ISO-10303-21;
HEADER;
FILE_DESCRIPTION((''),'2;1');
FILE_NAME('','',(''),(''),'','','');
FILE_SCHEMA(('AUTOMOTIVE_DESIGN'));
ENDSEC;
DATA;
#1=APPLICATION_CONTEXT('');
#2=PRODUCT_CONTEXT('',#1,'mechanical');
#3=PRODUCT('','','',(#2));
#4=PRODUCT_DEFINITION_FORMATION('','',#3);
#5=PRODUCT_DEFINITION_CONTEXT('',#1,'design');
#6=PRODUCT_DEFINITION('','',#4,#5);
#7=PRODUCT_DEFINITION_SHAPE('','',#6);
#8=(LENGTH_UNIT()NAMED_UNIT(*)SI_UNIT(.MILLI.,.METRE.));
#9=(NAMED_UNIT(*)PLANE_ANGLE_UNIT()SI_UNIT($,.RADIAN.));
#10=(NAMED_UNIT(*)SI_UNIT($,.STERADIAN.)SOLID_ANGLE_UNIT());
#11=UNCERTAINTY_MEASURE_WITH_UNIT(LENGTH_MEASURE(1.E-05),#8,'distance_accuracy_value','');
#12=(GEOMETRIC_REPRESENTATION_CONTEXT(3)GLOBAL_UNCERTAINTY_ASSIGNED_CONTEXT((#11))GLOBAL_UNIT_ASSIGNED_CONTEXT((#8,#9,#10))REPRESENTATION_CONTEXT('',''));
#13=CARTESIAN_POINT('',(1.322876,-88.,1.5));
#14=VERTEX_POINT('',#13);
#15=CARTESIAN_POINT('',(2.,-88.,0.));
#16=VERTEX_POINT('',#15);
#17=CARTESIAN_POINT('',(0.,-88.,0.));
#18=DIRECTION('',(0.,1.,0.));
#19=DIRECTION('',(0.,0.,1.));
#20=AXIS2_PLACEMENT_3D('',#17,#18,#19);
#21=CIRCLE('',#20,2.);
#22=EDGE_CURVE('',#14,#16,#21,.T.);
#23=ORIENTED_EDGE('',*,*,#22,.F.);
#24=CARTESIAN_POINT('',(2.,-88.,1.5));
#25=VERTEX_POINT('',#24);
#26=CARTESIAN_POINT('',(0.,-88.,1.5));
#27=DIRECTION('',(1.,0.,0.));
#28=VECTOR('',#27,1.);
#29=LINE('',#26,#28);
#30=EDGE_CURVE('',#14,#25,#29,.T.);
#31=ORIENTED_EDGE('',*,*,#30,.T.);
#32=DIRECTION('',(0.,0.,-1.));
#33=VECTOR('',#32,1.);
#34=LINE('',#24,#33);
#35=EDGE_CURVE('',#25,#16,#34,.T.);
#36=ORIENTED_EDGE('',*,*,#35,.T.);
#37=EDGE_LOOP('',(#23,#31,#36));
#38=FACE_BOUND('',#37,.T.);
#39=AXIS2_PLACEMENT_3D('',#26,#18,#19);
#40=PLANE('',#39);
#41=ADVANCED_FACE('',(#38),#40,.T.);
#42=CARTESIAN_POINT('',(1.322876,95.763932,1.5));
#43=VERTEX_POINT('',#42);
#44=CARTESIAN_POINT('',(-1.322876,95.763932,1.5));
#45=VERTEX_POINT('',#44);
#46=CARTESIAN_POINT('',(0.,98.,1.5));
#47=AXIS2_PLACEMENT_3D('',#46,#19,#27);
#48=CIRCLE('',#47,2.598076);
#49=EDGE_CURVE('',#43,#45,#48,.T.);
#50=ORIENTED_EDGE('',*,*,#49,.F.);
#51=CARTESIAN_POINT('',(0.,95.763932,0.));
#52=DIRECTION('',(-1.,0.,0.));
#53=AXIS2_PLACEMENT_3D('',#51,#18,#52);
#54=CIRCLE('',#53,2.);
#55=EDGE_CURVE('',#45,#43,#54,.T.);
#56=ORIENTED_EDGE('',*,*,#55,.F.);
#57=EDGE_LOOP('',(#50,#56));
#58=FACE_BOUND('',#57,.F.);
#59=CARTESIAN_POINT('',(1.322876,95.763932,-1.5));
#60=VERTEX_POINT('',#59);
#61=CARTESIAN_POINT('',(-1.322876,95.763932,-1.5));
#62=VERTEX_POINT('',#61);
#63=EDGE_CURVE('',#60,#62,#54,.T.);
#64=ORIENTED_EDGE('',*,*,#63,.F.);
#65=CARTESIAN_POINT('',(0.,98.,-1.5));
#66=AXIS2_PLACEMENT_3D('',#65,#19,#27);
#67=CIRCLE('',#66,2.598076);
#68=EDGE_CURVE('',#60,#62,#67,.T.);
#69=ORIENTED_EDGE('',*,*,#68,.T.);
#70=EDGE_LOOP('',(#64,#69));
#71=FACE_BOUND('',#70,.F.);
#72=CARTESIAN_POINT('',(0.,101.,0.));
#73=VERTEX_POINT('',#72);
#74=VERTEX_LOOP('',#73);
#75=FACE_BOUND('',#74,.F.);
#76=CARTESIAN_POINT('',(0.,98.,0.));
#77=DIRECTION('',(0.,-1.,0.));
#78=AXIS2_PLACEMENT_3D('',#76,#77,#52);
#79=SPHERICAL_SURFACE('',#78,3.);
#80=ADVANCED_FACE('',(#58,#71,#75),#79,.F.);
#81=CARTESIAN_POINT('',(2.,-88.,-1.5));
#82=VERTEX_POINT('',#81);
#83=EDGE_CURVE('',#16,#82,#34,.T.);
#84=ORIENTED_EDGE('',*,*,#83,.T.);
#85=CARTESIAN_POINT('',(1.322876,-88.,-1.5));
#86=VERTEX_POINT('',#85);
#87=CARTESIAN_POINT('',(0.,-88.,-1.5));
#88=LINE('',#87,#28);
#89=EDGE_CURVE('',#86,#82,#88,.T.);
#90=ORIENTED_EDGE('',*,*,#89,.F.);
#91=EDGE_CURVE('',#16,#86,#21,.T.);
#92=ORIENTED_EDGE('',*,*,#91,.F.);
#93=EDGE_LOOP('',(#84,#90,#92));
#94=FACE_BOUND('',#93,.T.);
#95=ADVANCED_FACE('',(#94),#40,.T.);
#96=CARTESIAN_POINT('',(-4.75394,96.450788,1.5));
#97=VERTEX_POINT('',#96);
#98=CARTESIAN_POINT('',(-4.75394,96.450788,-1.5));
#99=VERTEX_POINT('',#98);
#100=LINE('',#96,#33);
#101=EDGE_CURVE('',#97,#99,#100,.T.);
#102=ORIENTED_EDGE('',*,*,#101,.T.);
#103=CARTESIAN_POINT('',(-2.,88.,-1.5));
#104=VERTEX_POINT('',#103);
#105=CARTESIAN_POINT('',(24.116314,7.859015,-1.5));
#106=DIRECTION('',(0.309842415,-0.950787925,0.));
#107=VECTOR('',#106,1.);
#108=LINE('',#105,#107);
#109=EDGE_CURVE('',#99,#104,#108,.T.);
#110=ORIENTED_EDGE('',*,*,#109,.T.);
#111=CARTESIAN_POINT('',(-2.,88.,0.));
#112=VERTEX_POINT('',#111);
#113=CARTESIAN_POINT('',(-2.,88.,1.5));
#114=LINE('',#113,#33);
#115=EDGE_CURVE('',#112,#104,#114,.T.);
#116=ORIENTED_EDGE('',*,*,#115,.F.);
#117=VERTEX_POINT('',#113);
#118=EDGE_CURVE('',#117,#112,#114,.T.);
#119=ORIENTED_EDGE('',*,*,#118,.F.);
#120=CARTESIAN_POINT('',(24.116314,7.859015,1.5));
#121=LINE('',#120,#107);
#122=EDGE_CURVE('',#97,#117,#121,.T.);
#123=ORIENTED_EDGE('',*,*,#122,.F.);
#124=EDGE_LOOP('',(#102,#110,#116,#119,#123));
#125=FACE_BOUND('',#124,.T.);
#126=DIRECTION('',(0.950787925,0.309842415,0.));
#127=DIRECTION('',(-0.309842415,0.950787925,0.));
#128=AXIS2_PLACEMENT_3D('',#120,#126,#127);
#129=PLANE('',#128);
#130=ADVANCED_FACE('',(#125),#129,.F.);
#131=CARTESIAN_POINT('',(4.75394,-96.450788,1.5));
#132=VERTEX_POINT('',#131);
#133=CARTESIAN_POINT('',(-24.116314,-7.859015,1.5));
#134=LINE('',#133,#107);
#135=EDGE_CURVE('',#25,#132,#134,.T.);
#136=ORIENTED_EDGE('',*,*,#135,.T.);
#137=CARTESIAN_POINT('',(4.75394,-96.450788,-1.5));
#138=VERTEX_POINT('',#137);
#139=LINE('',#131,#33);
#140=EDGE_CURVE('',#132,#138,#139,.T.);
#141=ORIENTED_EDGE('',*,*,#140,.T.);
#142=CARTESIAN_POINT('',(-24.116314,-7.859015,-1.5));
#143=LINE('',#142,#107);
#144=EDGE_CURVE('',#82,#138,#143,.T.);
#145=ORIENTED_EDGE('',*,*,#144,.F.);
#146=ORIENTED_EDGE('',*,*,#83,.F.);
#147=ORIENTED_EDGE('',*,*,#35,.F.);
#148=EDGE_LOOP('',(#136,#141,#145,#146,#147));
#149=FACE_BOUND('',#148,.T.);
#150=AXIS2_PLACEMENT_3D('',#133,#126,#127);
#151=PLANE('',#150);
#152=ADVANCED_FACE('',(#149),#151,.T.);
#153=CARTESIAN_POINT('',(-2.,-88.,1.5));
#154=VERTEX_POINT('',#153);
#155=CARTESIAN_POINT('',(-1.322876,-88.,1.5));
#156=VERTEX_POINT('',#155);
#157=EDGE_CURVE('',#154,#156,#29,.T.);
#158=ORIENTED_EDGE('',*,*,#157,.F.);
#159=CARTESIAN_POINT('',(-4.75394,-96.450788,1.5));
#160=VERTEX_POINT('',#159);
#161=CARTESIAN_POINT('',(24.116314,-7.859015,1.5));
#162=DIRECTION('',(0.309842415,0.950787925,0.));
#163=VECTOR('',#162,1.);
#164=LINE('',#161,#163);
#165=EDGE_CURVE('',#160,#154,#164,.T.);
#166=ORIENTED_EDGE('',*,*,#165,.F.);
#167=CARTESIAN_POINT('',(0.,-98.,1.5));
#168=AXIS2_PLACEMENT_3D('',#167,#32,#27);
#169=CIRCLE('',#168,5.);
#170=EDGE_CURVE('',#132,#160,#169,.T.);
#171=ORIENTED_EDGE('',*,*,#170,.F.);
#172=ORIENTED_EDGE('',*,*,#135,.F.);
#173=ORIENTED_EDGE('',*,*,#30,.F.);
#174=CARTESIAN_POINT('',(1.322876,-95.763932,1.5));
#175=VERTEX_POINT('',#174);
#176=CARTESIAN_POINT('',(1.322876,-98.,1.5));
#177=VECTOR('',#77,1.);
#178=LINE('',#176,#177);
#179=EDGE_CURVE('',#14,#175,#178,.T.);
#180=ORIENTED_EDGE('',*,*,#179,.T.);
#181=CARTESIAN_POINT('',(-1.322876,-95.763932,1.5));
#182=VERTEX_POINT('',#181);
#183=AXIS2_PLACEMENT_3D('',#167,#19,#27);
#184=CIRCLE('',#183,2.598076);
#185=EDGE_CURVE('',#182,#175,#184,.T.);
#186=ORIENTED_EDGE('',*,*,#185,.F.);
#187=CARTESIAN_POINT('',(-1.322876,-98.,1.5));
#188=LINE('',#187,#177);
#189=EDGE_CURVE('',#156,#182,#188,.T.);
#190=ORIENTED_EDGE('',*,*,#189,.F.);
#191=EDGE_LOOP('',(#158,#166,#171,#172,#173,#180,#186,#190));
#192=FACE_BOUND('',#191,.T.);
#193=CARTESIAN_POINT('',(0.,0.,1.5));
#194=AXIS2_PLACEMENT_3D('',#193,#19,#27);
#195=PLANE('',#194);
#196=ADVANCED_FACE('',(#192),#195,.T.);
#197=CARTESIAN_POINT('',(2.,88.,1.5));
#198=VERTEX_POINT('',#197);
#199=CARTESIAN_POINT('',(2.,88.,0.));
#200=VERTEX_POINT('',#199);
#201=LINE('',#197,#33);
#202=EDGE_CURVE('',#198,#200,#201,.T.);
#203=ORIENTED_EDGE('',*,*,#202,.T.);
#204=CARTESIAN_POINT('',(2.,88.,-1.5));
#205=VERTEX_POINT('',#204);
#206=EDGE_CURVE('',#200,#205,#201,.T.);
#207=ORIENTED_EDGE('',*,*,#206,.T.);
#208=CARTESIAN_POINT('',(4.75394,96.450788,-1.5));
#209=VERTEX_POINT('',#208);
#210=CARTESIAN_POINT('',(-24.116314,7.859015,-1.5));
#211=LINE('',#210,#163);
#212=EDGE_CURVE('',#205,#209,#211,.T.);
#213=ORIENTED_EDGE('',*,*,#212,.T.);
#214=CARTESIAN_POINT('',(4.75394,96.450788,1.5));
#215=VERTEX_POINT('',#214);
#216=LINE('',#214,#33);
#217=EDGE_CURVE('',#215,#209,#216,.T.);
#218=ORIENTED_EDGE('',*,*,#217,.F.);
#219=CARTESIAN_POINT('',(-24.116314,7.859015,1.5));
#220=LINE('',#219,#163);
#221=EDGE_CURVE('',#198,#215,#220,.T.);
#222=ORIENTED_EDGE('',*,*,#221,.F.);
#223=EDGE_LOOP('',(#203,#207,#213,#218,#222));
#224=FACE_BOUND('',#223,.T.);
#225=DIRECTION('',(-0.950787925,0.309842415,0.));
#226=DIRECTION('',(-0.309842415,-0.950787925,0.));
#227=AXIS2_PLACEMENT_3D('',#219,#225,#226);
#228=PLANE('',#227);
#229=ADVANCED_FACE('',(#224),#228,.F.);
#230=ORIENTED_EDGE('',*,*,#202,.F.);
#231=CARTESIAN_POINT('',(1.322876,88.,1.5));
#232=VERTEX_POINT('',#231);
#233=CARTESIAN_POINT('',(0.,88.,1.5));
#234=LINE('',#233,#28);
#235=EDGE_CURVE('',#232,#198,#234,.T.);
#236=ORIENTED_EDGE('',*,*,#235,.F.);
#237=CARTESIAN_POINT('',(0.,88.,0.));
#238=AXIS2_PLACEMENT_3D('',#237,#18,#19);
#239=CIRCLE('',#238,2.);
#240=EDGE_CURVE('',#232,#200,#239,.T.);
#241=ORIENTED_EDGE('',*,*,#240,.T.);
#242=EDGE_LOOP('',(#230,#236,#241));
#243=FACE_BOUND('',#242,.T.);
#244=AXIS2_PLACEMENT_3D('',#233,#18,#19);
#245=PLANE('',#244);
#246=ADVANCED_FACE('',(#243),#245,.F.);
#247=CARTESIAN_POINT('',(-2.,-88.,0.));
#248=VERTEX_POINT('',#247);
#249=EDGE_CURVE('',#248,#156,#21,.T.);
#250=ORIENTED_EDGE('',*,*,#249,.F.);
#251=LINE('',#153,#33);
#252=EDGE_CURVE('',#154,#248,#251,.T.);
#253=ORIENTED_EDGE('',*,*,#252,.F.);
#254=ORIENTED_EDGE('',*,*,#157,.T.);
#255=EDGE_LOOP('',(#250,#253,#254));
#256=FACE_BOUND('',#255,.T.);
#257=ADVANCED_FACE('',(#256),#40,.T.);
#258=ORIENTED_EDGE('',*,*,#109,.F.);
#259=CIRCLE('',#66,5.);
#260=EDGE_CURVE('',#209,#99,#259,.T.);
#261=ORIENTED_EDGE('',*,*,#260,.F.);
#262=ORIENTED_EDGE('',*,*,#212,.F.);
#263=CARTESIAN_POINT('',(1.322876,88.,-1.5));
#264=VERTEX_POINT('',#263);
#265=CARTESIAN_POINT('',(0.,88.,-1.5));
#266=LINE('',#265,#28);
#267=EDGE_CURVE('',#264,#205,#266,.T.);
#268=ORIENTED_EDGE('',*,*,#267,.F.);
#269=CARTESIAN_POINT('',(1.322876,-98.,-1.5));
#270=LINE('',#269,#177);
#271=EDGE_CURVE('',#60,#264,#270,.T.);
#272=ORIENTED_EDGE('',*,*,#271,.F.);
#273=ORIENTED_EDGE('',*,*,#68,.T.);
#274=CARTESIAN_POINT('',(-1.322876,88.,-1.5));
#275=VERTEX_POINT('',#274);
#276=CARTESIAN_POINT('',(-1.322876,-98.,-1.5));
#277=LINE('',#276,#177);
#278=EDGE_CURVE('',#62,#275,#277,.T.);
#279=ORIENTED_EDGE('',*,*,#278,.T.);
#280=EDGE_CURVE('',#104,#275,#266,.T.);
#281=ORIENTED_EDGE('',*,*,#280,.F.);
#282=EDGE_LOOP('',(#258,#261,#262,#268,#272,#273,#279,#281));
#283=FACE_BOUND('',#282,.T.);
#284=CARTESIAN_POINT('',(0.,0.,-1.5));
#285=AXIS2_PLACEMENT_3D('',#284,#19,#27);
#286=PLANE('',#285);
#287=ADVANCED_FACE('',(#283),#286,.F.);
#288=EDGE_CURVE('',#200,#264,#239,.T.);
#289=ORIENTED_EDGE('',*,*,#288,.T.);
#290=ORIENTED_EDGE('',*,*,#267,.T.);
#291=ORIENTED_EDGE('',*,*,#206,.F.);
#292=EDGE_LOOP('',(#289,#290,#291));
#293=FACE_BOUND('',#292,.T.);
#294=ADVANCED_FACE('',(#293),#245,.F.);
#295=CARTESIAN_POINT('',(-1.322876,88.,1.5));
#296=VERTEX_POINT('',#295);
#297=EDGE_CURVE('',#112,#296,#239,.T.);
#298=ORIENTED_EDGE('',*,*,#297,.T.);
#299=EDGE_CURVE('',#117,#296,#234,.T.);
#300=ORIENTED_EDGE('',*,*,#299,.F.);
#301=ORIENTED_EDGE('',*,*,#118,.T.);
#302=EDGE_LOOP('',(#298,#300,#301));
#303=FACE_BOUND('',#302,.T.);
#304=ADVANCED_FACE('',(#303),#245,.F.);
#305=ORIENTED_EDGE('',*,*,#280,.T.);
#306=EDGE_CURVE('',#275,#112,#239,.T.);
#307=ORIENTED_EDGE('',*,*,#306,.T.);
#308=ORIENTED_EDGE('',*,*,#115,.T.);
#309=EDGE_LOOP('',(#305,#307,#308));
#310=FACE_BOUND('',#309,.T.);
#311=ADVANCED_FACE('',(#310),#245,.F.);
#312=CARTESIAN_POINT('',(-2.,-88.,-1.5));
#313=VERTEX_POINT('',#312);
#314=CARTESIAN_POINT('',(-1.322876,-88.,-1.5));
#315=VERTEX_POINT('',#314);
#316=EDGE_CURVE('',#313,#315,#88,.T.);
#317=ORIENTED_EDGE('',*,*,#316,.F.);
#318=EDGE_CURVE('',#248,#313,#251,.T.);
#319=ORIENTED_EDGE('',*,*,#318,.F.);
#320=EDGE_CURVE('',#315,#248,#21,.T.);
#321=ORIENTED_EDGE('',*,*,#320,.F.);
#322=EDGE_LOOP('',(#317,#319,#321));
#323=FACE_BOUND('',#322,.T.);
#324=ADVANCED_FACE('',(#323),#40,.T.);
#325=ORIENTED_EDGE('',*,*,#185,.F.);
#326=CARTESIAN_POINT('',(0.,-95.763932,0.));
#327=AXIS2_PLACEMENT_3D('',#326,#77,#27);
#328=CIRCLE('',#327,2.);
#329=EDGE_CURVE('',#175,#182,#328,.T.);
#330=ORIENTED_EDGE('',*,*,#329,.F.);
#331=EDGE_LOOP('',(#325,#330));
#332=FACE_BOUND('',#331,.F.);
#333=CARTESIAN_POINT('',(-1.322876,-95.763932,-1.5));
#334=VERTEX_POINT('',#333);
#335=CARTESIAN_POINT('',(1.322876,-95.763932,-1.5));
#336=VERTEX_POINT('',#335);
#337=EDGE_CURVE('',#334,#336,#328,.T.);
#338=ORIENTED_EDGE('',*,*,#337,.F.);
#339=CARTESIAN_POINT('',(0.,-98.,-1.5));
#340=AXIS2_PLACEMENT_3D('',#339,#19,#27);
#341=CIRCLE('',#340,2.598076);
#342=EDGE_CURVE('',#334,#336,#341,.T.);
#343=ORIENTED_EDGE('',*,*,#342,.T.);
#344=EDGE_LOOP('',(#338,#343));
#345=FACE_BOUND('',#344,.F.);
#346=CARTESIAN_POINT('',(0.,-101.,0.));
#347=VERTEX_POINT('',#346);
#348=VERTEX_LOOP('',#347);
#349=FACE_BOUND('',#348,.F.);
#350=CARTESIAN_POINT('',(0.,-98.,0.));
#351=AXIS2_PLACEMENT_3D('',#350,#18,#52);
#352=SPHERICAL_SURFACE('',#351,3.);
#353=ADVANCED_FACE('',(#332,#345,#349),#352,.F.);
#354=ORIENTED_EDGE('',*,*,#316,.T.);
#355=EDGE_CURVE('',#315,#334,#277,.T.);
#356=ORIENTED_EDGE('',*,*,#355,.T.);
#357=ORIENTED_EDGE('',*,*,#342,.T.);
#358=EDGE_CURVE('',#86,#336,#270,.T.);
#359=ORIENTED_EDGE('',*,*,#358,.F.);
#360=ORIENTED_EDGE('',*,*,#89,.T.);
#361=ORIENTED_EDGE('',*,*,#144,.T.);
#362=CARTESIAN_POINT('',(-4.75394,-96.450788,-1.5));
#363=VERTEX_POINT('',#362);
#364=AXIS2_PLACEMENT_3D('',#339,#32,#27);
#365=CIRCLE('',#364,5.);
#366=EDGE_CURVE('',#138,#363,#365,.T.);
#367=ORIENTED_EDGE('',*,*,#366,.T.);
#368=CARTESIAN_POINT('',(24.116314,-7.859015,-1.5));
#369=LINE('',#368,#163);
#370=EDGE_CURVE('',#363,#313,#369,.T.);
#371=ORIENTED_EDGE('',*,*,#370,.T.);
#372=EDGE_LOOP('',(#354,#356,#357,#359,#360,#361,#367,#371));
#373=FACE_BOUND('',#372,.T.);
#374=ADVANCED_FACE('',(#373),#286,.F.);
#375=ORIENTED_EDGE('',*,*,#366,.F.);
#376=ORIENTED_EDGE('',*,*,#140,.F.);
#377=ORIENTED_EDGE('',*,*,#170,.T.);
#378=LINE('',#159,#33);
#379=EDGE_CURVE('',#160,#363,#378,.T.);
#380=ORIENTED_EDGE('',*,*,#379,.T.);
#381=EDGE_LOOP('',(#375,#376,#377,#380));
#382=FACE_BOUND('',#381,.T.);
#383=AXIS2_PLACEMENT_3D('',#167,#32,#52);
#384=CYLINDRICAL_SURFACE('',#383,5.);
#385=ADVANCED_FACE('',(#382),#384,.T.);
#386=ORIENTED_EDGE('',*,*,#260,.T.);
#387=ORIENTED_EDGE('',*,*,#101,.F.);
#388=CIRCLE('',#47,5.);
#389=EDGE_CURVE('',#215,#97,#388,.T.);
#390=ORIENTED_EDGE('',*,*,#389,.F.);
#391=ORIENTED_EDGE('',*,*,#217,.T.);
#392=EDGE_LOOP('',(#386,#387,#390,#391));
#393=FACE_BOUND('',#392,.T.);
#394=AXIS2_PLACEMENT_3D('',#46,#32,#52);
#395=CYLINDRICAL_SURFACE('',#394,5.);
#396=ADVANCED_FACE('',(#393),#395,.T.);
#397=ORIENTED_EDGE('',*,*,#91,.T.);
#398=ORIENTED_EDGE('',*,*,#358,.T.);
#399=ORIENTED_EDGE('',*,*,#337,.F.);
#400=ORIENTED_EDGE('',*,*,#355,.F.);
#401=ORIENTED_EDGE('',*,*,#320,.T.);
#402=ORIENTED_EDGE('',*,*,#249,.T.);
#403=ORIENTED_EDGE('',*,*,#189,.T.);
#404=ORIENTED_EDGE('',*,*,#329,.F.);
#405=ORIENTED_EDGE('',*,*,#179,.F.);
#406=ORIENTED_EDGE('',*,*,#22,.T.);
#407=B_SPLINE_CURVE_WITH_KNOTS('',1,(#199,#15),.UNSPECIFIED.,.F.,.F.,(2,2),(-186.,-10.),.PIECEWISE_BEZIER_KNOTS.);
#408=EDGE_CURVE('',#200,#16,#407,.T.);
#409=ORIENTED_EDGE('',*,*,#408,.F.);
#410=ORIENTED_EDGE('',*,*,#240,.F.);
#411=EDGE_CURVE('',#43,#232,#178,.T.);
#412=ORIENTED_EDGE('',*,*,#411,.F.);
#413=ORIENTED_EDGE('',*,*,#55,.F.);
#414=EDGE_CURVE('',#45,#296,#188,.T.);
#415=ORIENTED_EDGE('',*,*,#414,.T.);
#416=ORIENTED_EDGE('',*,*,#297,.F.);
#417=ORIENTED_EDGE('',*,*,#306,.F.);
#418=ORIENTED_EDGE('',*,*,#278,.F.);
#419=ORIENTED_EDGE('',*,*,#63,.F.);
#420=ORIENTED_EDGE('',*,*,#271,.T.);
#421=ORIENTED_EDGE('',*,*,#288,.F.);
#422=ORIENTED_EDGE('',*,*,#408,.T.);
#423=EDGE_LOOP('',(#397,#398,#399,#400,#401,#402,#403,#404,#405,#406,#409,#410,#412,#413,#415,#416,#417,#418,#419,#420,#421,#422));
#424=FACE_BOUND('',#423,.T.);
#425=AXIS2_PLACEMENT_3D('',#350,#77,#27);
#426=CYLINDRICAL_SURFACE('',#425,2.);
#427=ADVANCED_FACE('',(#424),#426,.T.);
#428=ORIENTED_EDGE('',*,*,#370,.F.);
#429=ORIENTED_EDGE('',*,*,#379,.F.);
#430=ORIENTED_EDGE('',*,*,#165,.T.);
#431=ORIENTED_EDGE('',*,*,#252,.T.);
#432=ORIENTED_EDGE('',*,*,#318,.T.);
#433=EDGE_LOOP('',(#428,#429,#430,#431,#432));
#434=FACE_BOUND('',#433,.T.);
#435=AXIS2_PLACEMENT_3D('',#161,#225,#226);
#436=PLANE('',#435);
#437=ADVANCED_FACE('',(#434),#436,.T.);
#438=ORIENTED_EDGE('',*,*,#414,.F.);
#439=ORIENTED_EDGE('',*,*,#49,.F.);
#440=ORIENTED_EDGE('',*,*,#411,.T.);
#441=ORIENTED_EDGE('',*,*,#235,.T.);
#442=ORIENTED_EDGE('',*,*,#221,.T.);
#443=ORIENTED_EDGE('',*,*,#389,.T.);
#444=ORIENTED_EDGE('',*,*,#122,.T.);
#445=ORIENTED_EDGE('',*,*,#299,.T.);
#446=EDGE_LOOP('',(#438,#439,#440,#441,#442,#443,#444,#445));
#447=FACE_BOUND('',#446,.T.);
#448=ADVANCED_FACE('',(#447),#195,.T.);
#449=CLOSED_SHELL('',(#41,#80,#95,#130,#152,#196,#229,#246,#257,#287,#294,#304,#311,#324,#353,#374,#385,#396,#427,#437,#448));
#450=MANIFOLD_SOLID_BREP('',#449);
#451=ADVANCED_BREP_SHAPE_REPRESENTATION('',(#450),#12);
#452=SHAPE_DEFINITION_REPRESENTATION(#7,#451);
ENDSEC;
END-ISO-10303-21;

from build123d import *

# Parameters (mm, degrees)
ESQUISSE1_W        = 2
ESQUISSE1_H        = 196
BOSS_EXTRU_1_DEPTH = 1.5


with BuildPart() as part:
    # Esquisse1 → Révolution1 (revolve)
    with BuildSketch(Plane.XY):
        with Locations((1, 0)):
            Rectangle(ESQUISSE1_W, ESQUISSE1_H)
    revolve(axis=Axis((0, -98, 0), (0, 1, 0)))

    # Esquisse2 → Boss.-Extru.1 (add, symmetric)
    with BuildSketch(Plane.XY):
        with BuildLine():
            Line((2, 88), (4.753939624, 96.450787925))
            ThreePointArc((4.753939624, 96.450787925), (0, 103), (-4.753939624, 96.450787925))
            Line((-4.753939624, 96.450787925), (-2, 88))
            Line((-2, 88), (2, 88))
        make_face()
    boss_extru_1 = extrude(amount=BOSS_EXTRU_1_DEPTH, both=True)

    # Esquisse3 → Enlèvement de matière-Révolution1 (revolve, cut)
    with BuildSketch(Plane.XY):
        with BuildLine():
            Line((0, 101), (0, 95))
            ThreePointArc((0, 95), (-3, 98), (0, 101))
        make_face()
    enl_vement_de_mati_re_r_volution1 = revolve(axis=Axis((0, 95, 0), (0, 1, 0)), mode=Mode.SUBTRACT)

    # Symétrie1: Boss.-Extru.1, Enlèvement de matière-Révolution1 across plane
    add(boss_extru_1.mirror(Plane.ZX))
    add(enl_vement_de_mati_re_r_volution1.mirror(Plane.ZX), mode=Mode.SUBTRACT)


solid = part.part
